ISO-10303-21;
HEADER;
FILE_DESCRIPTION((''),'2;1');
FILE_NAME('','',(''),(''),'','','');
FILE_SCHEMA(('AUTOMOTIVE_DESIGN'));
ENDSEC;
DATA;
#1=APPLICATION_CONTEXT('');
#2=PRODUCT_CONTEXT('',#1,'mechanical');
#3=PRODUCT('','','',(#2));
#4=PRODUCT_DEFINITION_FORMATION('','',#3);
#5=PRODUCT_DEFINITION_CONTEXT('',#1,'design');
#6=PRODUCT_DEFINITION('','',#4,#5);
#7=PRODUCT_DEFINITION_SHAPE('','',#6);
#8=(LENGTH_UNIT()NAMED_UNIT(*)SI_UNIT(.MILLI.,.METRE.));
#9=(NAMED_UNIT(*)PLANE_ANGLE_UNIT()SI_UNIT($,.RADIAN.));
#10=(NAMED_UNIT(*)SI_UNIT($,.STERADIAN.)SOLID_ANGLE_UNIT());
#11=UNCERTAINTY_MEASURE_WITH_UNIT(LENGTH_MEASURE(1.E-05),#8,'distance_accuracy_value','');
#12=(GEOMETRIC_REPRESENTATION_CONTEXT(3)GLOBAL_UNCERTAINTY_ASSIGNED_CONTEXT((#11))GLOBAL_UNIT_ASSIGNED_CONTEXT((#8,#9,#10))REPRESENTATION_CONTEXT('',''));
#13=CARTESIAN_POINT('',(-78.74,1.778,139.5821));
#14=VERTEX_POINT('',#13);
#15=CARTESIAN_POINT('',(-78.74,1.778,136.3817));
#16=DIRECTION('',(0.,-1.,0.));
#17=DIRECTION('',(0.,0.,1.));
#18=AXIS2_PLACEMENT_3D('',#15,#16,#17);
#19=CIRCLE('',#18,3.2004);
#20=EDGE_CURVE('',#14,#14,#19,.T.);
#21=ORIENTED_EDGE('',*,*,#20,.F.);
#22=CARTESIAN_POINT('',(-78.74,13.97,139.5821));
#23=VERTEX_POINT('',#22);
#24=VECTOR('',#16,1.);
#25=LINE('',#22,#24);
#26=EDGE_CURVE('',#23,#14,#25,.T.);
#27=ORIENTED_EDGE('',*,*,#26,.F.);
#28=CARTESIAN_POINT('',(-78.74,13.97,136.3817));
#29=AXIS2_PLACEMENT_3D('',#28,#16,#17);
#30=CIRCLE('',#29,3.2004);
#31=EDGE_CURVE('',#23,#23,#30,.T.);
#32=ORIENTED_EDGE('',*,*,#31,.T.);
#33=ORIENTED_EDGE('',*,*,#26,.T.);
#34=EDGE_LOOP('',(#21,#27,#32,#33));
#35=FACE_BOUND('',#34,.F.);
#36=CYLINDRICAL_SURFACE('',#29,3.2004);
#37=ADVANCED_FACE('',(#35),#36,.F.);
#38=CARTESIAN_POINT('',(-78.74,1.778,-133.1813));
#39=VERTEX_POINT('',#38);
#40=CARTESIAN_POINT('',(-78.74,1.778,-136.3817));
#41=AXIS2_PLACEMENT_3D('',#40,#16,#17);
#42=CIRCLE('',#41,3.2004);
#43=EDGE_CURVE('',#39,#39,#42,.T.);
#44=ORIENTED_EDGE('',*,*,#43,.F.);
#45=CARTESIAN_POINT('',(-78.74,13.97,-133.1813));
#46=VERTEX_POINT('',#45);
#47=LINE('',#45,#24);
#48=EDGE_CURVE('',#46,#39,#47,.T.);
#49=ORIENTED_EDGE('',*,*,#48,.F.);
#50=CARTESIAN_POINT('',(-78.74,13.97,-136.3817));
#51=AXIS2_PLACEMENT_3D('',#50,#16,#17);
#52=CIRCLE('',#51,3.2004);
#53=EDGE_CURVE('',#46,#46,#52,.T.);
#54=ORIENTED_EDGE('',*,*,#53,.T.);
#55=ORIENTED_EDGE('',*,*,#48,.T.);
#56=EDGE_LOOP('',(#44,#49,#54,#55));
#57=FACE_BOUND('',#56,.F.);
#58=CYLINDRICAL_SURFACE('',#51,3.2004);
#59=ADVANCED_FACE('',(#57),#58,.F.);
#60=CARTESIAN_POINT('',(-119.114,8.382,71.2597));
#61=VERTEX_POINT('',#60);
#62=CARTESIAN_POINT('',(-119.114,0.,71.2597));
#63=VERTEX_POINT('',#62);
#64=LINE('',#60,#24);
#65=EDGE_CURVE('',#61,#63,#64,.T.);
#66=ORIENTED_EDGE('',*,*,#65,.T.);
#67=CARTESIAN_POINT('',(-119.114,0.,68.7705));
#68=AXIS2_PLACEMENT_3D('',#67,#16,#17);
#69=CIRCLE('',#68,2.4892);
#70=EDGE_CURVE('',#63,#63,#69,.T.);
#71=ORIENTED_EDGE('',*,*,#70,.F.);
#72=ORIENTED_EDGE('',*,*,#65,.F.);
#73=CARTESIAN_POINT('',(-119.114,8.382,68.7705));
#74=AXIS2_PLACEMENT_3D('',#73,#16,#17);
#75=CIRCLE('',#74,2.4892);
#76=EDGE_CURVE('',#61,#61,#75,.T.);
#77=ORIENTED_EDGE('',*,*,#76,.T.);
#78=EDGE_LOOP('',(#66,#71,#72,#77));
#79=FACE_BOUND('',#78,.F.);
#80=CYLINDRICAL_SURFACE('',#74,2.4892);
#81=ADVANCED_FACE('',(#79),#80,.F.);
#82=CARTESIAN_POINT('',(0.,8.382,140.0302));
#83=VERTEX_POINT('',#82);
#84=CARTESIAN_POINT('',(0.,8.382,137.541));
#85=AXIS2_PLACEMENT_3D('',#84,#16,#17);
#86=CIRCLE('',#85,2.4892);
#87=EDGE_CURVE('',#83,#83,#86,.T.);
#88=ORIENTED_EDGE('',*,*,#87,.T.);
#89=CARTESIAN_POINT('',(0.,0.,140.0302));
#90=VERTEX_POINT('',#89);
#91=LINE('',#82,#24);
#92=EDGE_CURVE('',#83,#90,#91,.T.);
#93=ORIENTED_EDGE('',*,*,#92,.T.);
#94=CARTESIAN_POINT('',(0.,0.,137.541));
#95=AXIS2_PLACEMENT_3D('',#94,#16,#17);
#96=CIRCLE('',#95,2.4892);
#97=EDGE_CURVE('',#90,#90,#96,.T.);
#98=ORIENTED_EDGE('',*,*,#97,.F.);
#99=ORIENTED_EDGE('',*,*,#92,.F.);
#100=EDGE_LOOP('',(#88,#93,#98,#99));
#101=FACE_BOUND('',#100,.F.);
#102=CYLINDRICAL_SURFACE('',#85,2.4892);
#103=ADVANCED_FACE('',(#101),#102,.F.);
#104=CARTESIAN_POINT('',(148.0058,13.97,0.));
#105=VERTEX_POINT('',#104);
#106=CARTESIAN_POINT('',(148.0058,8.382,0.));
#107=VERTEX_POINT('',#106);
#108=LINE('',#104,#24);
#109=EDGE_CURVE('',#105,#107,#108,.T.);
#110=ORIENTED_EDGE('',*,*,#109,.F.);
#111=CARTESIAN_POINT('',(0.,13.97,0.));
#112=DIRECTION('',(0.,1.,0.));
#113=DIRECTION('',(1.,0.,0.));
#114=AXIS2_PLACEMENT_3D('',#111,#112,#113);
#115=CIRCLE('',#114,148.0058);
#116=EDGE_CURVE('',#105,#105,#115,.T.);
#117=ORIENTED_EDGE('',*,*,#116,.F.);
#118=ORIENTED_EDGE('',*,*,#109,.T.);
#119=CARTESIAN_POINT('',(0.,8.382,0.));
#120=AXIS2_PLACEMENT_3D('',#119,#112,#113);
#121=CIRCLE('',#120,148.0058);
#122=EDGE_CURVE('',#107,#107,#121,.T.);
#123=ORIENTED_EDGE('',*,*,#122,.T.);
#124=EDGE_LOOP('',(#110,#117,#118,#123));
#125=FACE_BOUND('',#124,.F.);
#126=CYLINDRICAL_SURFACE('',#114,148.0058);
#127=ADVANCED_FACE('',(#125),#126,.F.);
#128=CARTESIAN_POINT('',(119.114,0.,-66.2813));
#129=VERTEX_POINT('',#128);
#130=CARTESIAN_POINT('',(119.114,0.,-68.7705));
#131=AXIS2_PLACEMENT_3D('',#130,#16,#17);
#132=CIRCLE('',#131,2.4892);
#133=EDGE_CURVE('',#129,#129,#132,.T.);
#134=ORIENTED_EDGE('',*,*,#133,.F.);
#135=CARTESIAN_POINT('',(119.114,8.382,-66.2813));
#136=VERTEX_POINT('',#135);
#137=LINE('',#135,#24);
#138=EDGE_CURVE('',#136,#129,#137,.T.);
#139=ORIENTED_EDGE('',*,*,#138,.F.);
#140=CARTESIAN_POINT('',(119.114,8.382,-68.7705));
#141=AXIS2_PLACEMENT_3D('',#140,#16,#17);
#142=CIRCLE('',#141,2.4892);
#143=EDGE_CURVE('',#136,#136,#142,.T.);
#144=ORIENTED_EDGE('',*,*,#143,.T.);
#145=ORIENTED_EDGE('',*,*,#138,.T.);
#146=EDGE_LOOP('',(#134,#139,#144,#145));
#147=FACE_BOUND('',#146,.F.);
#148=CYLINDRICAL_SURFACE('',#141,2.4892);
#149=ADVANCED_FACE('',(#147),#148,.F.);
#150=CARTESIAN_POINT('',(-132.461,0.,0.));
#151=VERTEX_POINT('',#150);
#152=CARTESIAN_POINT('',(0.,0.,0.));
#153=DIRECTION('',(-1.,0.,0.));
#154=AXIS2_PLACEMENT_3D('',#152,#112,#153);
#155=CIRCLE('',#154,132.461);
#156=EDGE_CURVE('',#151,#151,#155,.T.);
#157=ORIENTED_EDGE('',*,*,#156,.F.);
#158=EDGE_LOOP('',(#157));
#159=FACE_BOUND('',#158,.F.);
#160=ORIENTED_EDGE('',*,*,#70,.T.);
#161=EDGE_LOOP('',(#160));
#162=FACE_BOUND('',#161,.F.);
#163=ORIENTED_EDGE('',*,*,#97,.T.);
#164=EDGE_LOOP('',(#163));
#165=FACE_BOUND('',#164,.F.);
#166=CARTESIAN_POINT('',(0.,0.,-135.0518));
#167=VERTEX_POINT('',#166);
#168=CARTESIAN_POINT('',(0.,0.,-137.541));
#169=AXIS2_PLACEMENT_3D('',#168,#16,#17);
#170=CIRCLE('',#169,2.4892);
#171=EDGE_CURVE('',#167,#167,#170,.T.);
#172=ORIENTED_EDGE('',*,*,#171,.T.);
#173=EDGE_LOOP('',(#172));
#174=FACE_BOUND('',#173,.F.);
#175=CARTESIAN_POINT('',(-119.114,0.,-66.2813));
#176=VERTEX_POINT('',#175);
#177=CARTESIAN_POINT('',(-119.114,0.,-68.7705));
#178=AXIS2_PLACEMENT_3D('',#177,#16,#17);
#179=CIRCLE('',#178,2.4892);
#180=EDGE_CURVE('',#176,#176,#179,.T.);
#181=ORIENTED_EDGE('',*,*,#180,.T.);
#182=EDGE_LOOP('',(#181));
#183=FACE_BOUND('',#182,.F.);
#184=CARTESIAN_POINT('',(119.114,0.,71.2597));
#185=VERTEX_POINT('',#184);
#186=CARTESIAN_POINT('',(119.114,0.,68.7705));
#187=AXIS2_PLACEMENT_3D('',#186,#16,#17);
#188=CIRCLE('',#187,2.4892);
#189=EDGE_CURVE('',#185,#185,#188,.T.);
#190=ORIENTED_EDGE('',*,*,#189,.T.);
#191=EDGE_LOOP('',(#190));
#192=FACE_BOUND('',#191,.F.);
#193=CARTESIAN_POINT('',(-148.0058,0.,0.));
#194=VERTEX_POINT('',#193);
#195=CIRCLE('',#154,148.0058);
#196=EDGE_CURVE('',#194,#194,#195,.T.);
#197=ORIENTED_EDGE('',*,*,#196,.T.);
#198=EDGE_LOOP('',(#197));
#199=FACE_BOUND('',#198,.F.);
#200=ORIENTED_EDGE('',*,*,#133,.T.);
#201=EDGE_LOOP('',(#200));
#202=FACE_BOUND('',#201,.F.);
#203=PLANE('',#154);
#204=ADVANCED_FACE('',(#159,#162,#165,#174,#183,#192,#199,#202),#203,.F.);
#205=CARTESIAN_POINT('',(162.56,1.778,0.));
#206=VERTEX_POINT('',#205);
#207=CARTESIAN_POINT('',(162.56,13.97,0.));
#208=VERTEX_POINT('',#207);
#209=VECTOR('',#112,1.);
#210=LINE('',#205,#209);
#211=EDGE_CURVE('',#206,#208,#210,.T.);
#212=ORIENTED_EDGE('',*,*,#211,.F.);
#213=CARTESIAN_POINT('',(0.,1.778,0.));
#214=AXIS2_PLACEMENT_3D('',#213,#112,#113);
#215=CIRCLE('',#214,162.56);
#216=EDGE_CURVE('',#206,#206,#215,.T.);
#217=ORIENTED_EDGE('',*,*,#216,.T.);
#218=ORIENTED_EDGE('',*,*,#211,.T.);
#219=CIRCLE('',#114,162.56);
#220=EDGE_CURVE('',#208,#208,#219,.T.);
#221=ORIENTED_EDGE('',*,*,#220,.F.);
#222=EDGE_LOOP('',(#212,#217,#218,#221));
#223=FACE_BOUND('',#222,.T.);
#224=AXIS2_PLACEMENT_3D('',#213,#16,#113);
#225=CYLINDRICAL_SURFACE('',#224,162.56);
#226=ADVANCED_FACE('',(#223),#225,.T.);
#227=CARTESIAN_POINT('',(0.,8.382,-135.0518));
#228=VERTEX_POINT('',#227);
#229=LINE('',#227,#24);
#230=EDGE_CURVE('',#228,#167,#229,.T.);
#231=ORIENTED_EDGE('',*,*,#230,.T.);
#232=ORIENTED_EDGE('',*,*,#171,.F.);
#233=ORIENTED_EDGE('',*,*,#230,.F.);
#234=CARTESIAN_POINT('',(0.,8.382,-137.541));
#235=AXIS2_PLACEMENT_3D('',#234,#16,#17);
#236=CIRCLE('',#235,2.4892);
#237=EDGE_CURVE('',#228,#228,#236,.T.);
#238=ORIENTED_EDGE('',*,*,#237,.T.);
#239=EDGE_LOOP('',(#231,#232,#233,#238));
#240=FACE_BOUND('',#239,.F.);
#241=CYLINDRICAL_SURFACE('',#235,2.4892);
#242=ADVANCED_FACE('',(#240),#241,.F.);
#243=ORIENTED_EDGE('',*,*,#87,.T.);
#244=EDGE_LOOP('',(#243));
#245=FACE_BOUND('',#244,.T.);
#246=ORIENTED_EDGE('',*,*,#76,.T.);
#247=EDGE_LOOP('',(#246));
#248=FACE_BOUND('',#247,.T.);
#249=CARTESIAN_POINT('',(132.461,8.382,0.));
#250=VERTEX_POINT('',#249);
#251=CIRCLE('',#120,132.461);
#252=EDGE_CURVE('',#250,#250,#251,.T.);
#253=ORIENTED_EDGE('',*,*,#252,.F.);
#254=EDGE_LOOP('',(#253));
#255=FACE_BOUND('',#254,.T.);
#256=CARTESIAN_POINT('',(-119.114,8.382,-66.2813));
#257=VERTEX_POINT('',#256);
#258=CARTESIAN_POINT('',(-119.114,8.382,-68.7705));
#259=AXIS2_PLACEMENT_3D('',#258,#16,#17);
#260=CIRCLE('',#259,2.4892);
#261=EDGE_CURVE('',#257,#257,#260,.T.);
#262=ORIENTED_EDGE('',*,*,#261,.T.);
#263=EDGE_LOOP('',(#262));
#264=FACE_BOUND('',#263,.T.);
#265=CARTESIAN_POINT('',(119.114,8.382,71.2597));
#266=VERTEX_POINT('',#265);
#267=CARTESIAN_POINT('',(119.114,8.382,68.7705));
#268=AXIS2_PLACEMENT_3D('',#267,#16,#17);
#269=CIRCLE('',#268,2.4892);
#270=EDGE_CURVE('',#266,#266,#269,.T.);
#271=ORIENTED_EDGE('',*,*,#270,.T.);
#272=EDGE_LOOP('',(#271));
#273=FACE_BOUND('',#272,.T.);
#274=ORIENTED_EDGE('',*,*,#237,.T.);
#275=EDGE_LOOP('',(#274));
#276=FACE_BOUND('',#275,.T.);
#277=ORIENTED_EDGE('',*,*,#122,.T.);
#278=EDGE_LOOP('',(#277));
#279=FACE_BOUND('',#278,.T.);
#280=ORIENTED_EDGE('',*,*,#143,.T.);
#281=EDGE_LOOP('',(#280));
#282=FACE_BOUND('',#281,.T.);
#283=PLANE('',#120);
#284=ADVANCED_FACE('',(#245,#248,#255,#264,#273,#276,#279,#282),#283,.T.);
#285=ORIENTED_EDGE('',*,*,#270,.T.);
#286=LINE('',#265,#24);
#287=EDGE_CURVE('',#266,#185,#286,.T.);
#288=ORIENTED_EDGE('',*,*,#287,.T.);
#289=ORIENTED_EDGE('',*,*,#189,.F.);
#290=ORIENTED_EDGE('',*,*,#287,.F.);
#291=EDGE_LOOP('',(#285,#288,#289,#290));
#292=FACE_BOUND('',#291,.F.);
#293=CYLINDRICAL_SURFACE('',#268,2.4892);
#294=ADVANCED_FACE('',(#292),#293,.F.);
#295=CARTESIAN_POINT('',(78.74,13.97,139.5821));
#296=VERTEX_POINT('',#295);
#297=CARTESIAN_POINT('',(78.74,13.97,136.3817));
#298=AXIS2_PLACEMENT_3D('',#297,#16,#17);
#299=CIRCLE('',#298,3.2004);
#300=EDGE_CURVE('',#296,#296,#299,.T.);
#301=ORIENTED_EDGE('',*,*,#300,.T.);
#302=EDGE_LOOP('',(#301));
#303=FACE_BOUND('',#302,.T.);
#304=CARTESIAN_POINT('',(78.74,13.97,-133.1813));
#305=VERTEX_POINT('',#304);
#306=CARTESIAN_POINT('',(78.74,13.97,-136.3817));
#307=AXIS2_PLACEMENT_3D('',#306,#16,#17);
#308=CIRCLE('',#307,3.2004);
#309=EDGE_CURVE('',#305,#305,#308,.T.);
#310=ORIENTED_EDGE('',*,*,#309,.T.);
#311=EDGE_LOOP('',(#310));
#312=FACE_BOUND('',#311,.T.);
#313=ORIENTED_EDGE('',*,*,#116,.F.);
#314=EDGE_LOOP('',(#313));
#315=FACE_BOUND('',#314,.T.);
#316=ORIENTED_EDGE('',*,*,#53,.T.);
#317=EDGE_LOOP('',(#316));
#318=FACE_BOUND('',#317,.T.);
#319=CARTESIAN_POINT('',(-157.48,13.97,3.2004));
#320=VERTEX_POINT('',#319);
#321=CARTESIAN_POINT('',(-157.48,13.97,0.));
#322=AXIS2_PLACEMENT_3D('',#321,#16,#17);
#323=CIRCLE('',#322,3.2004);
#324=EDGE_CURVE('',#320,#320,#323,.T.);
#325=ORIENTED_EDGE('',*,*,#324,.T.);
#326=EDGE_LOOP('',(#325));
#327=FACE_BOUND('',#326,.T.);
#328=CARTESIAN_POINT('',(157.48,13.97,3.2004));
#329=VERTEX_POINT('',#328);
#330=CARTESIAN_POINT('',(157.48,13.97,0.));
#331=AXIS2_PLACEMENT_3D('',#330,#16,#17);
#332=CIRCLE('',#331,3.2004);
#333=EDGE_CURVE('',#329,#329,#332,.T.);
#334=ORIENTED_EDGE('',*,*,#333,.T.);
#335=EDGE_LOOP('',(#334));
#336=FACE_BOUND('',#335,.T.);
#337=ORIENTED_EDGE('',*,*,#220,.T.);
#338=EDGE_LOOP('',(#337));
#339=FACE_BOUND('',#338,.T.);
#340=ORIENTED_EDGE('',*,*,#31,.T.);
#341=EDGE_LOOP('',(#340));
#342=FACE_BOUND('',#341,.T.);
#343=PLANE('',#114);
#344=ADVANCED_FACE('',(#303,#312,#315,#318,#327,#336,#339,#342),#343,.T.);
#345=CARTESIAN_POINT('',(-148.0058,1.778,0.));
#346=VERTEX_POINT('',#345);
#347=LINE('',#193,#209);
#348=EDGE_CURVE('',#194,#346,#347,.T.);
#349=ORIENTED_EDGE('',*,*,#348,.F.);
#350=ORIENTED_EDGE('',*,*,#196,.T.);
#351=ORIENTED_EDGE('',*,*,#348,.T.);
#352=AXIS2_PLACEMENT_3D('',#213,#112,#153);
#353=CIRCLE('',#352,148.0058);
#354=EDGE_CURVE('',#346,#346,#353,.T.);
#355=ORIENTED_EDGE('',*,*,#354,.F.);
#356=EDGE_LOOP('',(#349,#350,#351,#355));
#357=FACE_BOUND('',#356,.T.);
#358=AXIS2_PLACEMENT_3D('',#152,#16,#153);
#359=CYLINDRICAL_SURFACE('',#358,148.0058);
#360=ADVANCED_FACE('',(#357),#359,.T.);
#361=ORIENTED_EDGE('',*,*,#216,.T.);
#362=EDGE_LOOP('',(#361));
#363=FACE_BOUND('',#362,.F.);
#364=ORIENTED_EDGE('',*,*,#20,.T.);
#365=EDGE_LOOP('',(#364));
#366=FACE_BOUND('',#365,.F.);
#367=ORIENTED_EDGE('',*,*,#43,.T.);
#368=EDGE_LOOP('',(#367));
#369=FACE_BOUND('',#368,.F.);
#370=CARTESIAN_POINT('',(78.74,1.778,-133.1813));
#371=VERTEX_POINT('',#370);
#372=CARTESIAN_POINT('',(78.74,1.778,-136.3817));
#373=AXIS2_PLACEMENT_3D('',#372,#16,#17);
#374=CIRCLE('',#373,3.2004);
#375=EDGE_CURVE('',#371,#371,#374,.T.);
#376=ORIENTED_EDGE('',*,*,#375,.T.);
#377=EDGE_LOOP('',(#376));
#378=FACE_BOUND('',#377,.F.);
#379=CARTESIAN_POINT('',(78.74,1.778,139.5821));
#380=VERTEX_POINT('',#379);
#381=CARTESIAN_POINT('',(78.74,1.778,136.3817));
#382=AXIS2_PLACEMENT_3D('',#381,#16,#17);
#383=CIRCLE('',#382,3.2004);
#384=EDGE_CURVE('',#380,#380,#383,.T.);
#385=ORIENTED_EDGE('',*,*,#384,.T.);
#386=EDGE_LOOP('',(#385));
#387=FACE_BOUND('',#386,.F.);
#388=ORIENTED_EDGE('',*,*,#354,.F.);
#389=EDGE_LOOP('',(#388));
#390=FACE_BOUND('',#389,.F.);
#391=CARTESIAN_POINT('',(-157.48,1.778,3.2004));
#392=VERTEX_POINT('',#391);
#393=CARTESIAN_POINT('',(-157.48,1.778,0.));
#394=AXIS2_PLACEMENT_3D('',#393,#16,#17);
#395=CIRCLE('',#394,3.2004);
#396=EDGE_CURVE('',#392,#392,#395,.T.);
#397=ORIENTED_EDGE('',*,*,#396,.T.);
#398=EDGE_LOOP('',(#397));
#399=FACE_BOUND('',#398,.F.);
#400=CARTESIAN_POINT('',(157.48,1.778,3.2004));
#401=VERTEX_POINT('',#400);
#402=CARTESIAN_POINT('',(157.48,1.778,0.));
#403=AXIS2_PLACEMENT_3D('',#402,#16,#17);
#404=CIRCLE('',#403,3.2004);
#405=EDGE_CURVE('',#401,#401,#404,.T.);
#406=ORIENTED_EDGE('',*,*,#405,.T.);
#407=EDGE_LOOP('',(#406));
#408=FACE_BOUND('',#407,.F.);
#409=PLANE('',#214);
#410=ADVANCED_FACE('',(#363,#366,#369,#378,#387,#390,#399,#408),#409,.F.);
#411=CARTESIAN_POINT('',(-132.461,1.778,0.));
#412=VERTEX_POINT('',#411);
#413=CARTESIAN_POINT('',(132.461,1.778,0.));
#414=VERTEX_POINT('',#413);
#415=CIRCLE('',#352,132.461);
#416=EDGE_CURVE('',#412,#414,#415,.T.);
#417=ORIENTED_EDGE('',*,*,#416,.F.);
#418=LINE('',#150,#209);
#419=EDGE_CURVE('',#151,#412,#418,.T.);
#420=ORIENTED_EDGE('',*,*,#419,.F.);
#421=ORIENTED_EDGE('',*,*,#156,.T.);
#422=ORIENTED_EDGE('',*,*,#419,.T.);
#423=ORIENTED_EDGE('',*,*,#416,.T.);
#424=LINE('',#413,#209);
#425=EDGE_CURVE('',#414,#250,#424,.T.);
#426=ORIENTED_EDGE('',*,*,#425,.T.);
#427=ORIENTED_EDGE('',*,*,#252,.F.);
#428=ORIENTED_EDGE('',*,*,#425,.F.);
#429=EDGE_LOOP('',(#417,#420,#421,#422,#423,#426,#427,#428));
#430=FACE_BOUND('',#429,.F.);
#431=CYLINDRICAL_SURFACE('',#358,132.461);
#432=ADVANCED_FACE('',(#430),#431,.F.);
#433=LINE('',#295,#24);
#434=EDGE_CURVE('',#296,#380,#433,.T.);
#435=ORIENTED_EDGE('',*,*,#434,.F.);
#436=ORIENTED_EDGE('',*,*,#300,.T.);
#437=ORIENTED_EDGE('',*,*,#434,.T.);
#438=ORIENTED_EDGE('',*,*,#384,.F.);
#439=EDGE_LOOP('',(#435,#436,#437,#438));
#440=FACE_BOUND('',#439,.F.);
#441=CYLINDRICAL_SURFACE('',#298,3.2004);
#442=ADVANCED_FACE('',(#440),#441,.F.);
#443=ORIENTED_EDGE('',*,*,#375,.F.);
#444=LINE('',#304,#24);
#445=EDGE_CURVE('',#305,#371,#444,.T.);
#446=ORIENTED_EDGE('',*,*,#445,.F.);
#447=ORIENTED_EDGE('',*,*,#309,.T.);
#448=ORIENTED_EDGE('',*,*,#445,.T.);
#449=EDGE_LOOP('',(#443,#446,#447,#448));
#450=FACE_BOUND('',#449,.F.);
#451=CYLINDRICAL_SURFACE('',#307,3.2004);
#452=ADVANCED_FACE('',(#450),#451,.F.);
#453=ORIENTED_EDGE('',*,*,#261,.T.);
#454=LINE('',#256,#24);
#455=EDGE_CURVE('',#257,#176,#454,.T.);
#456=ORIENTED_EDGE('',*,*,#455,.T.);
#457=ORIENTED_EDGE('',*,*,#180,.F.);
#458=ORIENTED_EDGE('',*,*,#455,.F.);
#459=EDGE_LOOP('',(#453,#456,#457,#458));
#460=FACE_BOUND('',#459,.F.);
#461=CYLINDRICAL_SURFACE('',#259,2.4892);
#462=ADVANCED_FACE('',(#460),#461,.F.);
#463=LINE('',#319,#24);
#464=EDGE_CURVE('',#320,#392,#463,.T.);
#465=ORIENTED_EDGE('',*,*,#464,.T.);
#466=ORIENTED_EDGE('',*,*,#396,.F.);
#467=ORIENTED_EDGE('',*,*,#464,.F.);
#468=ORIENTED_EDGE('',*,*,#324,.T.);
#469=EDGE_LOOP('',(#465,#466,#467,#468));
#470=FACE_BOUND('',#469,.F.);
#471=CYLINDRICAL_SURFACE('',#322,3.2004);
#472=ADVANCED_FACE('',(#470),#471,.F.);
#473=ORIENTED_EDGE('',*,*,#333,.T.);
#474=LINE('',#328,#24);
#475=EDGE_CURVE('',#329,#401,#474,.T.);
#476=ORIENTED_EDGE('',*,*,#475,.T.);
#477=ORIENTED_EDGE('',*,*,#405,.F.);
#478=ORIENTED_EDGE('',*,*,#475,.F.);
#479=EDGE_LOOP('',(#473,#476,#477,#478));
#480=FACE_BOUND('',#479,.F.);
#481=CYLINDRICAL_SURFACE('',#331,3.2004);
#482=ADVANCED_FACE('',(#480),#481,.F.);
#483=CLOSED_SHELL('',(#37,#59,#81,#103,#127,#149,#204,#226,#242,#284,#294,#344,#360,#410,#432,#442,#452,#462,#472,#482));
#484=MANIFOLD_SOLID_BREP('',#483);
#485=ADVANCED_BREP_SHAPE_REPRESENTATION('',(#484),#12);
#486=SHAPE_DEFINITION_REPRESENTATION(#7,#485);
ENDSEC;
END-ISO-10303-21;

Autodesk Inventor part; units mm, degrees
ref_plane "YZ Plane" through (0, 0, 0) normal (1, 0, 0) x (0, 1, 0)
ref_plane "XZ Plane" through (0, 0, 0) normal (0, 1, 0) x (-1, 0, 0)
ref_plane "XY Plane" through (0, 0, 0) normal (0, 0, 1) x (1, 0, 0)
sketch "Sketch1" plane through (0, 0, 0) normal (0, 1, 0) x (-1, 0, 0)
  circle A0 centre (0, 0) radius 162.56 construction
  circle A1 centre (0, 0) radius 148.0058
  circle A2 centre (0, 0) radius 132.461
  dimension "d0" = 325.12
  dimension "d1" = 296.0116
  dimension "d2" = 264.922
extrude "Extrusion1" add sketch "Sketch1" along normal blind 1.778
sketch "Sketch2" plane through (0, 1.778, 0) normal (0, 1, 0) x (1, 0, 0)
  circle A0 centre (0, 0) radius 132.461
  circle A1 centre (0, 0) radius 162.56
  dimension "d5" = 325.12
extrude "Extrusion2" add sketch "Sketch2" along normal blind 12.192
sketch "Sketch3" plane through (0, 13.97, 0) normal (0, 1, 0) x (1, 0, 0)
  circle A0 centre (0, 0) radius 148.0058
  circle A1 centre (0, 0) radius 132.461
extrude "Extrusion3" cut sketch "Sketch3" against normal blind 5.588
sketch "Sketch4" plane through (0, 13.97, 0) normal (0, 1, 0) x (1, 0, 0)
  circle A0 centre (0, 0) radius 157.48 construction
  circle A1 centre (-157.48, 0) radius 3.9687
  circle A2 centre (-78.74, -136.3817) radius 3.9687
  circle A3 centre (78.74, -136.3817) radius 3.9687
  circle A4 centre (157.48, 0) radius 3.9687
  circle A5 centre (78.74, 136.3817) radius 3.9687
  circle A6 centre (-78.74, 136.3817) radius 3.9687
  dimension "d10" = 314.96
  dimension "d11" = 7.9375
  dimension "d14" = 360
hole "Hole1" at (-157.48, 13.97, 0) at (78.74, 13.97, -136.3817) at (-78.74, 13.97, -136.3817) at (157.48, 13.97, 0) at (78.74, 13.97, 136.3817) at (-78.74, 13.97, 136.3817) direction (0, -1, 0) diameter 6.4008 depth 22.9362 thread size "5/16-18 UNC" class "2B" standard "ANSI Unified Screw Threads"
sketch "Sketch5" plane through (0, 8.382, 0) normal (0, 1, 0) x (1, 0, 0)
  line L0 (0, 0) -> (-122.3635, 70.6466) construction
  line L1 (0, 0) -> (141.2932, 0) construction
  line L2 (-122.3635, 70.6466) -> (0, 0) construction
  line L3 (0, 0) -> (-128.1768, -74.0029) construction
  circle A0 centre (0, 0) radius 148.0058 construction
  line L4 (0, 0) -> (148.0058, 0) construction
  circle A1 centre (0, 0) radius 137.541 construction
  circle A2 centre (-119.114, -68.7705) radius 3.175
  circle A3 centre (0, -137.541) radius 3.175
  circle A4 centre (119.114, -68.7705) radius 3.175
  circle A5 centre (119.114, 68.7705) radius 3.175
  circle A6 centre (0, 137.541) radius 3.175
  circle A7 centre (-119.114, 68.7705) radius 3.175
  dimension "d25" = 275.082
  dimension "d23" = 150
  dimension "d24" = 150
  dimension "d26" = 6.35
  dimension "d29" = 360
hole "Hole2" at (0, 8.382, 137.541) at (119.114, 8.382, 68.7705) at (119.114, 8.382, -68.7705) at (0, 8.382, -137.541) at (-119.114, 8.382, -68.7705) at (-119.114, 8.382, 68.7705) direction (0, -1, 0) diameter 4.9784 depth 19.05 thread size "1/4-20 UNC" class "2B" standard "ANSI Unified Screw Threads"
properties part number "Turntable_2" material "Aluminum 6061"
